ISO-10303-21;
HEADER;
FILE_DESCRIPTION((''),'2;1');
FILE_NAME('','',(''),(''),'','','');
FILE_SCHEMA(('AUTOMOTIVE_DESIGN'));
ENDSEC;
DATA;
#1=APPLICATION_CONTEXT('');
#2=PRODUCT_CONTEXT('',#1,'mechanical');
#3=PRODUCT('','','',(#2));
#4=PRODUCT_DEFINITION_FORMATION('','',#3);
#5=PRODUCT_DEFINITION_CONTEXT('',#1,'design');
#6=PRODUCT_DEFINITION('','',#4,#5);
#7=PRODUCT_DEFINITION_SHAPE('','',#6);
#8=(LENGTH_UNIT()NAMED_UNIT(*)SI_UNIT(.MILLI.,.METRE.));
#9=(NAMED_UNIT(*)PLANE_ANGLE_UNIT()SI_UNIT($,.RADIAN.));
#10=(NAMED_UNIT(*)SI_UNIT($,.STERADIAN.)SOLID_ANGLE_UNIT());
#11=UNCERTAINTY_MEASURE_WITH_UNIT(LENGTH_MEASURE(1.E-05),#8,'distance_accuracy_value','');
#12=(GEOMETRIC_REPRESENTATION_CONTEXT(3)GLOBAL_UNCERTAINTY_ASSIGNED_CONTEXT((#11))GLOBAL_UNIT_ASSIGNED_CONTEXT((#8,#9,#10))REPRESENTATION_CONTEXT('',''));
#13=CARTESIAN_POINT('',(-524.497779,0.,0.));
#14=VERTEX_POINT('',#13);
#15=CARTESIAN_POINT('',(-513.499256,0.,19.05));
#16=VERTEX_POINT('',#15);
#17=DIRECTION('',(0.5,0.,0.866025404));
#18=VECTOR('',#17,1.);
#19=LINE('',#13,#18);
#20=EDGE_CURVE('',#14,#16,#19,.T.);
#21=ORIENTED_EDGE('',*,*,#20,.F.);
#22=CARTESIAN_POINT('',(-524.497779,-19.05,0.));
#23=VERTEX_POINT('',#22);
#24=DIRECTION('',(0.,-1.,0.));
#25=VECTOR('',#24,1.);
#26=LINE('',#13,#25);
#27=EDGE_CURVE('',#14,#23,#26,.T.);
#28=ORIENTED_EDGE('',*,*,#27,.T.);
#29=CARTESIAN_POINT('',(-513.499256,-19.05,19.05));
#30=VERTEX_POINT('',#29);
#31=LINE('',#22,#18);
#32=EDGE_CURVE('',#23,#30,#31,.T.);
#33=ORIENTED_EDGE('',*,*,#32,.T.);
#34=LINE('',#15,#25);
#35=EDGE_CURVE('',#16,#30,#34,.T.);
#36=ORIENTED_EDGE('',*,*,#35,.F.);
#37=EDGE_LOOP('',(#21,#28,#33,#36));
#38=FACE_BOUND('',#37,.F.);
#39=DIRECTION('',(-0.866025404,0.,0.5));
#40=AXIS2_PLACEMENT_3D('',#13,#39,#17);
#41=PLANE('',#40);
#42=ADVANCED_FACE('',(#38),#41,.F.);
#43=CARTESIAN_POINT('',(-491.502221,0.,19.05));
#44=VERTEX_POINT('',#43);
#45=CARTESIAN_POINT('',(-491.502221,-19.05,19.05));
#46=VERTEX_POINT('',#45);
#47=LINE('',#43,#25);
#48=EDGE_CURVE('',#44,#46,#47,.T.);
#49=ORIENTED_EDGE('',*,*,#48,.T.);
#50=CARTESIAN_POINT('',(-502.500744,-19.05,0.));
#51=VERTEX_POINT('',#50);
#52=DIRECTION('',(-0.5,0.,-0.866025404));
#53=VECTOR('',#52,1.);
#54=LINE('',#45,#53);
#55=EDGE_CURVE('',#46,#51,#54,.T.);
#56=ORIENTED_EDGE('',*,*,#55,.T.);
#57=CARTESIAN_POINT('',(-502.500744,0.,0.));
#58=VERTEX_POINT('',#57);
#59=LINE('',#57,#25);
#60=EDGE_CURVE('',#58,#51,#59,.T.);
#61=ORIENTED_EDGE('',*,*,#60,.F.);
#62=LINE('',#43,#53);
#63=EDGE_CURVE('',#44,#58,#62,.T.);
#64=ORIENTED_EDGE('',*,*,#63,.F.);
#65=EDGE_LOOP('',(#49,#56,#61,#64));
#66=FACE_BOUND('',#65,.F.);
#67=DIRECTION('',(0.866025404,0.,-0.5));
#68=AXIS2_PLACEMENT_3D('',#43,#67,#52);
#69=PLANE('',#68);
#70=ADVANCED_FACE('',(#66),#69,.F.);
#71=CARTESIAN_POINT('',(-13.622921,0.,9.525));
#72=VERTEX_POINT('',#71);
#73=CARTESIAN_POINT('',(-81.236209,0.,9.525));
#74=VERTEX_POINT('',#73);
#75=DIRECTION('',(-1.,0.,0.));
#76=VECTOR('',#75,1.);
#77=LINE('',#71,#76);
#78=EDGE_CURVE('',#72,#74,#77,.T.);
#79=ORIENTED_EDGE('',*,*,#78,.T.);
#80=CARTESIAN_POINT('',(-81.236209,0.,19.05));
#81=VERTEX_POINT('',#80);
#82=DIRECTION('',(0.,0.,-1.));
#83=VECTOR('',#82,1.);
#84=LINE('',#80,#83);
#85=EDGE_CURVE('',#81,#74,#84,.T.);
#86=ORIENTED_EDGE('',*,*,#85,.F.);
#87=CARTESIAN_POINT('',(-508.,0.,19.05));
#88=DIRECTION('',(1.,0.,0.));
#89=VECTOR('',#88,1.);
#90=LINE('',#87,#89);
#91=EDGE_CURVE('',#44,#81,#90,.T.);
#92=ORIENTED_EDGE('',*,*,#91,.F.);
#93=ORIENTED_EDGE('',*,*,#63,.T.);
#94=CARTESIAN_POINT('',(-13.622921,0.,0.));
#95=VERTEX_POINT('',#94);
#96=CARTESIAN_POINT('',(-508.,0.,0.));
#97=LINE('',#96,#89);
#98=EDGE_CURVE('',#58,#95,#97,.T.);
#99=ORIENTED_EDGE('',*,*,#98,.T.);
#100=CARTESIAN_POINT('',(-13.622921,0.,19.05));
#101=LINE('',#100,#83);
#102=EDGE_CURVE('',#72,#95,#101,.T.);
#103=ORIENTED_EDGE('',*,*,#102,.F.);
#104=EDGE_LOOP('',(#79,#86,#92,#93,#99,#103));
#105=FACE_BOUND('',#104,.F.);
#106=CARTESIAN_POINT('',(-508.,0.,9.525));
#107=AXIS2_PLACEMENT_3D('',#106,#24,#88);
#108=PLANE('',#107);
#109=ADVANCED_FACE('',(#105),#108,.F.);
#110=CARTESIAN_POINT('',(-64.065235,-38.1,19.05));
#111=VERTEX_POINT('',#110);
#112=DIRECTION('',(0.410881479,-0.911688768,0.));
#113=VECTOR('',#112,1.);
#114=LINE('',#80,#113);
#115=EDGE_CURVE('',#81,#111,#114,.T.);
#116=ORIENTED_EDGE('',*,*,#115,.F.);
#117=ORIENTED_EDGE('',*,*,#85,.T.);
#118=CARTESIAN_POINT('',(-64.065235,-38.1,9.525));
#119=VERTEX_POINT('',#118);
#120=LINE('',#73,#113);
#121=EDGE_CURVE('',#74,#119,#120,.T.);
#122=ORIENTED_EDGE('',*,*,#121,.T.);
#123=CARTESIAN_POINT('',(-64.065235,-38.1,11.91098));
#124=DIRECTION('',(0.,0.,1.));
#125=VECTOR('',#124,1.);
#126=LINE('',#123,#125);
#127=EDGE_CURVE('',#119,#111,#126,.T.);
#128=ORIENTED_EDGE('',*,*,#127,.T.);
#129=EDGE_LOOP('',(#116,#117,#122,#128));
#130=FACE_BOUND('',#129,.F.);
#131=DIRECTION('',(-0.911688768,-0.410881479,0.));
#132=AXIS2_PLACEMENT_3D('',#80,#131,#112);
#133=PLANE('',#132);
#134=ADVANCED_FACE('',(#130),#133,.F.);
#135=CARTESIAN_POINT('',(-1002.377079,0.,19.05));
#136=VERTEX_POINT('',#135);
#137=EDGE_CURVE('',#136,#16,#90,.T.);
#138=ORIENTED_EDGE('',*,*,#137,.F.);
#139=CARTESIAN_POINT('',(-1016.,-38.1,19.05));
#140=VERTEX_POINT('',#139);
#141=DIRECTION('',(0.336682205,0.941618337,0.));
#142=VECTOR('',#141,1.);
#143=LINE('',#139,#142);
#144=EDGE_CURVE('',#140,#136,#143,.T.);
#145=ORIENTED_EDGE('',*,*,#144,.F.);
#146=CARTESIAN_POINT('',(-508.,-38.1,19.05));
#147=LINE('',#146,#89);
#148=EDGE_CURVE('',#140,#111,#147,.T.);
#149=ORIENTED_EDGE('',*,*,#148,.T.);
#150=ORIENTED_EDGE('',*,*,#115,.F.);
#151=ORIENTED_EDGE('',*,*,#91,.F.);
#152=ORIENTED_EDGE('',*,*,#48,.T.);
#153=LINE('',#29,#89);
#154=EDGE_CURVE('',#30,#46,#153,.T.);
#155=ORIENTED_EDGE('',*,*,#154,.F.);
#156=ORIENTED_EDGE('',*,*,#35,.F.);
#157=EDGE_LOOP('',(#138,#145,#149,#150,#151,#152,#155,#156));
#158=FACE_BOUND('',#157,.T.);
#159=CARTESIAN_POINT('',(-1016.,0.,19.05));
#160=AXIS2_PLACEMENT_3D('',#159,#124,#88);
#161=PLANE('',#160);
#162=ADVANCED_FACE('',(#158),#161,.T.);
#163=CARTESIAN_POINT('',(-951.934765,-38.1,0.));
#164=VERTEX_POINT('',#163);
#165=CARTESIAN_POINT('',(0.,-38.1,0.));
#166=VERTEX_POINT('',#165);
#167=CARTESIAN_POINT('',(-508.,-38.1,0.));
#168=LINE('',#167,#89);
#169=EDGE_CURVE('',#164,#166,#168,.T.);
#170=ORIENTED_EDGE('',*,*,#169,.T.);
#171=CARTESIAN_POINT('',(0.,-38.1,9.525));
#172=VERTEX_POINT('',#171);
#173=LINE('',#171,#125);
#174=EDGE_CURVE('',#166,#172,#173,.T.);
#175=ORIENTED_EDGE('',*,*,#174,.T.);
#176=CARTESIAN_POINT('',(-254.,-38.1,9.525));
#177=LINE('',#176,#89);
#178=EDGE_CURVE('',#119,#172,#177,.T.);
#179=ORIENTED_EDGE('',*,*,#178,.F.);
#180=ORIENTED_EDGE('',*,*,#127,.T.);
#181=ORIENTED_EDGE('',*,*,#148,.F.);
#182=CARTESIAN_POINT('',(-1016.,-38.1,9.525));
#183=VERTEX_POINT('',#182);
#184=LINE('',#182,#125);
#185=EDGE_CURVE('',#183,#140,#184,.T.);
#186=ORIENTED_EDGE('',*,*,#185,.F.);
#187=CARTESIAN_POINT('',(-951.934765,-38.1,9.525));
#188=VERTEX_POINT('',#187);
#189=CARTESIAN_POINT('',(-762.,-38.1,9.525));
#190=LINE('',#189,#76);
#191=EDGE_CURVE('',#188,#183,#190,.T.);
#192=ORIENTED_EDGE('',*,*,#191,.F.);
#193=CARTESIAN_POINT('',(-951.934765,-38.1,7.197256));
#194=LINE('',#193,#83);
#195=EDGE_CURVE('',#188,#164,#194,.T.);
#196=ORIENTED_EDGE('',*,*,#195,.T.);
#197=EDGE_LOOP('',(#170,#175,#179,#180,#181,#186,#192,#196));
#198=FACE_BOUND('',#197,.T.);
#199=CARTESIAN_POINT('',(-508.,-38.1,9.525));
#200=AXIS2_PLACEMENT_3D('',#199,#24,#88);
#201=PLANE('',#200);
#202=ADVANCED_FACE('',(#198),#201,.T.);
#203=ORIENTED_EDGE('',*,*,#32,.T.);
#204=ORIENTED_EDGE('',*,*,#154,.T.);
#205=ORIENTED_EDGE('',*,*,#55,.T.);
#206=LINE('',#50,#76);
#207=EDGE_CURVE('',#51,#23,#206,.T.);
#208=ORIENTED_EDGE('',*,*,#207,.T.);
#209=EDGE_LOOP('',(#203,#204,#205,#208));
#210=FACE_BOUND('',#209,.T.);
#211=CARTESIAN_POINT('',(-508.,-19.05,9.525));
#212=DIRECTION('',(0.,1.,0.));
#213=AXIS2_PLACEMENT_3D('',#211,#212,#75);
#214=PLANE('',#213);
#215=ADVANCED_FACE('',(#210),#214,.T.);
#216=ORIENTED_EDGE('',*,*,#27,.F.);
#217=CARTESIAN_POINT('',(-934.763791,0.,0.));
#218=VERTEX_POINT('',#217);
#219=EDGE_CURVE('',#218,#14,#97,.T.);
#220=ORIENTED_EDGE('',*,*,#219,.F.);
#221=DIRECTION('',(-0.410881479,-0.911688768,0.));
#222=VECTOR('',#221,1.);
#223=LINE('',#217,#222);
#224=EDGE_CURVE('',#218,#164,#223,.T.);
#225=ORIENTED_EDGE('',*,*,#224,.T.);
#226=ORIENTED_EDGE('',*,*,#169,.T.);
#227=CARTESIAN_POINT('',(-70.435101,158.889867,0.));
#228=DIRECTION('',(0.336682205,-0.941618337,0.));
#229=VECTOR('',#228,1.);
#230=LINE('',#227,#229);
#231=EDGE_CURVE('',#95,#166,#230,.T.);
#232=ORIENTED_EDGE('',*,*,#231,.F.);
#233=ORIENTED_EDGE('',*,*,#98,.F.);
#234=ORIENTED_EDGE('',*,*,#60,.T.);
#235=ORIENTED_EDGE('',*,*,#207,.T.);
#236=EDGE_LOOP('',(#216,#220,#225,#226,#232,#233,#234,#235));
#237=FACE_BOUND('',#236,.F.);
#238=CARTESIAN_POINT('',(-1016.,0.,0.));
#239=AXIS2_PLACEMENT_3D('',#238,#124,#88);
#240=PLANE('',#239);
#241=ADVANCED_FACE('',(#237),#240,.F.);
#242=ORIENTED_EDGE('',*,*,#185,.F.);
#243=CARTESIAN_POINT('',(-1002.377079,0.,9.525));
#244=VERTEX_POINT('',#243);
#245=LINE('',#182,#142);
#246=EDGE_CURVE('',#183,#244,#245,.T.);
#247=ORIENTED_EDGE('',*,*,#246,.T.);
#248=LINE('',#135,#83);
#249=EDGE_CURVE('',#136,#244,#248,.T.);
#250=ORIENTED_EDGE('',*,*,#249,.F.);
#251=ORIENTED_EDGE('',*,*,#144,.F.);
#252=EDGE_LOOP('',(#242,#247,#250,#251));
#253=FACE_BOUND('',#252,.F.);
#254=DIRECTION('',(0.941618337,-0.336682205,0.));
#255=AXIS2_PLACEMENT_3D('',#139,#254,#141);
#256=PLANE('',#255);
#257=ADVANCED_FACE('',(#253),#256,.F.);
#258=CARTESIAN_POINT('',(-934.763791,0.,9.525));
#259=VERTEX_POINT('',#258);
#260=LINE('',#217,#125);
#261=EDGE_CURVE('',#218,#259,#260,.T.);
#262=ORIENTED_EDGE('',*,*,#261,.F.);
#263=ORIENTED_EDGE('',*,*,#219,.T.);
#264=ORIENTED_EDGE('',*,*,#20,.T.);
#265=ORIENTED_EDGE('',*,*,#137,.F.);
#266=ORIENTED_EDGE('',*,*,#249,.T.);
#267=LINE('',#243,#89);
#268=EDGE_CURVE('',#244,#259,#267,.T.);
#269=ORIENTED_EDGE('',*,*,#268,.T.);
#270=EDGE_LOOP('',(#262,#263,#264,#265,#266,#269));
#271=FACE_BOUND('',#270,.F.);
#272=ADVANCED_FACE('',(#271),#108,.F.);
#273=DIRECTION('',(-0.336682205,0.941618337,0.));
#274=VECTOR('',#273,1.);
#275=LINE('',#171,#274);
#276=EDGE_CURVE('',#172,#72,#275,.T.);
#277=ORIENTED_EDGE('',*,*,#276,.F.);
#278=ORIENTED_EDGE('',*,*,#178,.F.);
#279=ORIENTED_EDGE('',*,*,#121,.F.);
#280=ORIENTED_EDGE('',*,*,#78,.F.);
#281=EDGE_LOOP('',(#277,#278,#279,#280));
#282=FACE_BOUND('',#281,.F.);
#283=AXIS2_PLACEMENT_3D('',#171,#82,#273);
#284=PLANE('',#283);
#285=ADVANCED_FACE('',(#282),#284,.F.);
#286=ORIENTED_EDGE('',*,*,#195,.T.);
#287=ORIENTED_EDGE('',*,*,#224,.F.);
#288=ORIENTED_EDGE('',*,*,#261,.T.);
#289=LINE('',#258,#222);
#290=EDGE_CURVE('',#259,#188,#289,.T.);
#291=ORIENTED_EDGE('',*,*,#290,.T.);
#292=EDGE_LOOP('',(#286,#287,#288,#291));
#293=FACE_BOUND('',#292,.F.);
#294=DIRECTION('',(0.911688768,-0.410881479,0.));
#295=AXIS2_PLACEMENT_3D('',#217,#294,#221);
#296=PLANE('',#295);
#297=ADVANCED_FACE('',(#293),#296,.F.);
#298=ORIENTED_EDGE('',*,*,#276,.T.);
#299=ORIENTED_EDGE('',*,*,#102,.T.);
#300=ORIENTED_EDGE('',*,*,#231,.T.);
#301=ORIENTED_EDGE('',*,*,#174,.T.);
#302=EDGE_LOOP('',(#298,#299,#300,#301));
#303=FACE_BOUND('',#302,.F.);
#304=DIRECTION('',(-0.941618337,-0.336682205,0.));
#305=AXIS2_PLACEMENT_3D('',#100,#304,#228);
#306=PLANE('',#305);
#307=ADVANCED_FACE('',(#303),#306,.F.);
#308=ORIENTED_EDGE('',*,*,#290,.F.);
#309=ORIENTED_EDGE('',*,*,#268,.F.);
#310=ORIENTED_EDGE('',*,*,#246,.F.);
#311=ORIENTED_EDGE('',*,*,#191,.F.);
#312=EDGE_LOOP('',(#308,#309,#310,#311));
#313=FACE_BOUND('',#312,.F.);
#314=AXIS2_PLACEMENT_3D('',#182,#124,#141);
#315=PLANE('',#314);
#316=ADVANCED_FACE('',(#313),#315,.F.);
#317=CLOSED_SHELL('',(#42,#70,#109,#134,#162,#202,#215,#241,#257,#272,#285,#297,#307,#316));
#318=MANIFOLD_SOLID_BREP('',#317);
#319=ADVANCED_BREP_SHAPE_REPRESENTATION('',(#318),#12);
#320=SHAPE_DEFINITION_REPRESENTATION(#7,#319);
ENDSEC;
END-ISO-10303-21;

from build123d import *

# Parameters (mm, degrees)
F0_W      = 1016
F0_H      = 19.05
F1_DEPTH  = 38.1
F3_DEPTH  = 50.8
F5_DEPTH  = 76.2
F7_DEPTH  = 60.325
F9_DEPTH  = 9.525
F11_DEPTH = 60.325
F13_DEPTH = 19.05
F15_DEPTH = 9.525


with BuildPart() as f1:
    # F0 (on Front) → F1 (new body)
    with BuildSketch(Plane.XZ):
        with Locations((-508, 9.525)):
            Rectangle(F0_W, F0_H)
    extrude(amount=F1_DEPTH)

    # F2 (on face) → F3 (cut)
    with BuildSketch(Plane.XY.offset(19.05)):
        Polygon((-1016, 0), (-1016, -38.1), (-1002.3770791998, 0), align=None)
    extrude(amount=-F3_DEPTH, mode=Mode.SUBTRACT)

    # F4 (on face) → F5 (cut)
    with BuildSketch(Plane.XY.offset(19.05)):
        Polygon((-13.6229208002, 0), (0, -38.1), (0, 0), align=None)
    extrude(amount=-F5_DEPTH, mode=Mode.SUBTRACT)

    # F6 (on face) → F7 (cut)
    with BuildSketch(Plane(origin=(-888.7527181239, 317.7797346454, 0), x_dir=(-0.3366822055, -0.941618337, 0), z_dir=(-0.941618337, 0.3366822055, 0))):
        Polygon((252.7767419815, 9.525), (258.7343550339, 0), (377.9447794005, 0), (377.9447794005, 9.525), align=None)
    extrude(amount=-F7_DEPTH, mode=Mode.SUBTRACT)

    # F8 (on face) → F9 (cut)
    with BuildSketch(Plane(origin=(0, 0, 0), x_dir=(1, 0, 0), z_dir=(0, 0, -1))):
        Polygon((-951.9347650406, 38.1), (-951.9347650406, 0), (-934.7637907817, 0), align=None)
    extrude(amount=-F9_DEPTH, mode=Mode.SUBTRACT)

    # F10 (on face) → F11 (cut)
    with BuildSketch(Plane(origin=(-12.0786958733, -4.3188219751, 0), x_dir=(-0.3366822055, 0.941618337, 0), z_dir=(0.941618337, 0.3366822055, 0))):
        Polygon((-35.8756586385, 19.05), (-35.8756586385, 9.525), (45.2719508199, 9.525), (45.6329248846, 19.05), align=None)
    extrude(amount=-F11_DEPTH, mode=Mode.SUBTRACT)

    # F12 (on face) → F13 (cut)
    with BuildSketch(Plane(origin=(0, 0, 0), x_dir=(-1, 0, 0), z_dir=(0, 1, 0))):
        Polygon((524.497778814, 0), (513.499256186, 19.05), (491.502221186, 19.05), (502.500743814, 0), align=None)
    extrude(amount=-F13_DEPTH, mode=Mode.SUBTRACT)

    # F14 (on face) → F15 (cut)
    with BuildSketch(Plane.XY.offset(19.05)):
        Polygon((-64.0652349594, 0), (-81.2362092183, 0), (-64.0652349594, -38.1), align=None)
    extrude(amount=-F15_DEPTH, mode=Mode.SUBTRACT)


solid = f1.part
